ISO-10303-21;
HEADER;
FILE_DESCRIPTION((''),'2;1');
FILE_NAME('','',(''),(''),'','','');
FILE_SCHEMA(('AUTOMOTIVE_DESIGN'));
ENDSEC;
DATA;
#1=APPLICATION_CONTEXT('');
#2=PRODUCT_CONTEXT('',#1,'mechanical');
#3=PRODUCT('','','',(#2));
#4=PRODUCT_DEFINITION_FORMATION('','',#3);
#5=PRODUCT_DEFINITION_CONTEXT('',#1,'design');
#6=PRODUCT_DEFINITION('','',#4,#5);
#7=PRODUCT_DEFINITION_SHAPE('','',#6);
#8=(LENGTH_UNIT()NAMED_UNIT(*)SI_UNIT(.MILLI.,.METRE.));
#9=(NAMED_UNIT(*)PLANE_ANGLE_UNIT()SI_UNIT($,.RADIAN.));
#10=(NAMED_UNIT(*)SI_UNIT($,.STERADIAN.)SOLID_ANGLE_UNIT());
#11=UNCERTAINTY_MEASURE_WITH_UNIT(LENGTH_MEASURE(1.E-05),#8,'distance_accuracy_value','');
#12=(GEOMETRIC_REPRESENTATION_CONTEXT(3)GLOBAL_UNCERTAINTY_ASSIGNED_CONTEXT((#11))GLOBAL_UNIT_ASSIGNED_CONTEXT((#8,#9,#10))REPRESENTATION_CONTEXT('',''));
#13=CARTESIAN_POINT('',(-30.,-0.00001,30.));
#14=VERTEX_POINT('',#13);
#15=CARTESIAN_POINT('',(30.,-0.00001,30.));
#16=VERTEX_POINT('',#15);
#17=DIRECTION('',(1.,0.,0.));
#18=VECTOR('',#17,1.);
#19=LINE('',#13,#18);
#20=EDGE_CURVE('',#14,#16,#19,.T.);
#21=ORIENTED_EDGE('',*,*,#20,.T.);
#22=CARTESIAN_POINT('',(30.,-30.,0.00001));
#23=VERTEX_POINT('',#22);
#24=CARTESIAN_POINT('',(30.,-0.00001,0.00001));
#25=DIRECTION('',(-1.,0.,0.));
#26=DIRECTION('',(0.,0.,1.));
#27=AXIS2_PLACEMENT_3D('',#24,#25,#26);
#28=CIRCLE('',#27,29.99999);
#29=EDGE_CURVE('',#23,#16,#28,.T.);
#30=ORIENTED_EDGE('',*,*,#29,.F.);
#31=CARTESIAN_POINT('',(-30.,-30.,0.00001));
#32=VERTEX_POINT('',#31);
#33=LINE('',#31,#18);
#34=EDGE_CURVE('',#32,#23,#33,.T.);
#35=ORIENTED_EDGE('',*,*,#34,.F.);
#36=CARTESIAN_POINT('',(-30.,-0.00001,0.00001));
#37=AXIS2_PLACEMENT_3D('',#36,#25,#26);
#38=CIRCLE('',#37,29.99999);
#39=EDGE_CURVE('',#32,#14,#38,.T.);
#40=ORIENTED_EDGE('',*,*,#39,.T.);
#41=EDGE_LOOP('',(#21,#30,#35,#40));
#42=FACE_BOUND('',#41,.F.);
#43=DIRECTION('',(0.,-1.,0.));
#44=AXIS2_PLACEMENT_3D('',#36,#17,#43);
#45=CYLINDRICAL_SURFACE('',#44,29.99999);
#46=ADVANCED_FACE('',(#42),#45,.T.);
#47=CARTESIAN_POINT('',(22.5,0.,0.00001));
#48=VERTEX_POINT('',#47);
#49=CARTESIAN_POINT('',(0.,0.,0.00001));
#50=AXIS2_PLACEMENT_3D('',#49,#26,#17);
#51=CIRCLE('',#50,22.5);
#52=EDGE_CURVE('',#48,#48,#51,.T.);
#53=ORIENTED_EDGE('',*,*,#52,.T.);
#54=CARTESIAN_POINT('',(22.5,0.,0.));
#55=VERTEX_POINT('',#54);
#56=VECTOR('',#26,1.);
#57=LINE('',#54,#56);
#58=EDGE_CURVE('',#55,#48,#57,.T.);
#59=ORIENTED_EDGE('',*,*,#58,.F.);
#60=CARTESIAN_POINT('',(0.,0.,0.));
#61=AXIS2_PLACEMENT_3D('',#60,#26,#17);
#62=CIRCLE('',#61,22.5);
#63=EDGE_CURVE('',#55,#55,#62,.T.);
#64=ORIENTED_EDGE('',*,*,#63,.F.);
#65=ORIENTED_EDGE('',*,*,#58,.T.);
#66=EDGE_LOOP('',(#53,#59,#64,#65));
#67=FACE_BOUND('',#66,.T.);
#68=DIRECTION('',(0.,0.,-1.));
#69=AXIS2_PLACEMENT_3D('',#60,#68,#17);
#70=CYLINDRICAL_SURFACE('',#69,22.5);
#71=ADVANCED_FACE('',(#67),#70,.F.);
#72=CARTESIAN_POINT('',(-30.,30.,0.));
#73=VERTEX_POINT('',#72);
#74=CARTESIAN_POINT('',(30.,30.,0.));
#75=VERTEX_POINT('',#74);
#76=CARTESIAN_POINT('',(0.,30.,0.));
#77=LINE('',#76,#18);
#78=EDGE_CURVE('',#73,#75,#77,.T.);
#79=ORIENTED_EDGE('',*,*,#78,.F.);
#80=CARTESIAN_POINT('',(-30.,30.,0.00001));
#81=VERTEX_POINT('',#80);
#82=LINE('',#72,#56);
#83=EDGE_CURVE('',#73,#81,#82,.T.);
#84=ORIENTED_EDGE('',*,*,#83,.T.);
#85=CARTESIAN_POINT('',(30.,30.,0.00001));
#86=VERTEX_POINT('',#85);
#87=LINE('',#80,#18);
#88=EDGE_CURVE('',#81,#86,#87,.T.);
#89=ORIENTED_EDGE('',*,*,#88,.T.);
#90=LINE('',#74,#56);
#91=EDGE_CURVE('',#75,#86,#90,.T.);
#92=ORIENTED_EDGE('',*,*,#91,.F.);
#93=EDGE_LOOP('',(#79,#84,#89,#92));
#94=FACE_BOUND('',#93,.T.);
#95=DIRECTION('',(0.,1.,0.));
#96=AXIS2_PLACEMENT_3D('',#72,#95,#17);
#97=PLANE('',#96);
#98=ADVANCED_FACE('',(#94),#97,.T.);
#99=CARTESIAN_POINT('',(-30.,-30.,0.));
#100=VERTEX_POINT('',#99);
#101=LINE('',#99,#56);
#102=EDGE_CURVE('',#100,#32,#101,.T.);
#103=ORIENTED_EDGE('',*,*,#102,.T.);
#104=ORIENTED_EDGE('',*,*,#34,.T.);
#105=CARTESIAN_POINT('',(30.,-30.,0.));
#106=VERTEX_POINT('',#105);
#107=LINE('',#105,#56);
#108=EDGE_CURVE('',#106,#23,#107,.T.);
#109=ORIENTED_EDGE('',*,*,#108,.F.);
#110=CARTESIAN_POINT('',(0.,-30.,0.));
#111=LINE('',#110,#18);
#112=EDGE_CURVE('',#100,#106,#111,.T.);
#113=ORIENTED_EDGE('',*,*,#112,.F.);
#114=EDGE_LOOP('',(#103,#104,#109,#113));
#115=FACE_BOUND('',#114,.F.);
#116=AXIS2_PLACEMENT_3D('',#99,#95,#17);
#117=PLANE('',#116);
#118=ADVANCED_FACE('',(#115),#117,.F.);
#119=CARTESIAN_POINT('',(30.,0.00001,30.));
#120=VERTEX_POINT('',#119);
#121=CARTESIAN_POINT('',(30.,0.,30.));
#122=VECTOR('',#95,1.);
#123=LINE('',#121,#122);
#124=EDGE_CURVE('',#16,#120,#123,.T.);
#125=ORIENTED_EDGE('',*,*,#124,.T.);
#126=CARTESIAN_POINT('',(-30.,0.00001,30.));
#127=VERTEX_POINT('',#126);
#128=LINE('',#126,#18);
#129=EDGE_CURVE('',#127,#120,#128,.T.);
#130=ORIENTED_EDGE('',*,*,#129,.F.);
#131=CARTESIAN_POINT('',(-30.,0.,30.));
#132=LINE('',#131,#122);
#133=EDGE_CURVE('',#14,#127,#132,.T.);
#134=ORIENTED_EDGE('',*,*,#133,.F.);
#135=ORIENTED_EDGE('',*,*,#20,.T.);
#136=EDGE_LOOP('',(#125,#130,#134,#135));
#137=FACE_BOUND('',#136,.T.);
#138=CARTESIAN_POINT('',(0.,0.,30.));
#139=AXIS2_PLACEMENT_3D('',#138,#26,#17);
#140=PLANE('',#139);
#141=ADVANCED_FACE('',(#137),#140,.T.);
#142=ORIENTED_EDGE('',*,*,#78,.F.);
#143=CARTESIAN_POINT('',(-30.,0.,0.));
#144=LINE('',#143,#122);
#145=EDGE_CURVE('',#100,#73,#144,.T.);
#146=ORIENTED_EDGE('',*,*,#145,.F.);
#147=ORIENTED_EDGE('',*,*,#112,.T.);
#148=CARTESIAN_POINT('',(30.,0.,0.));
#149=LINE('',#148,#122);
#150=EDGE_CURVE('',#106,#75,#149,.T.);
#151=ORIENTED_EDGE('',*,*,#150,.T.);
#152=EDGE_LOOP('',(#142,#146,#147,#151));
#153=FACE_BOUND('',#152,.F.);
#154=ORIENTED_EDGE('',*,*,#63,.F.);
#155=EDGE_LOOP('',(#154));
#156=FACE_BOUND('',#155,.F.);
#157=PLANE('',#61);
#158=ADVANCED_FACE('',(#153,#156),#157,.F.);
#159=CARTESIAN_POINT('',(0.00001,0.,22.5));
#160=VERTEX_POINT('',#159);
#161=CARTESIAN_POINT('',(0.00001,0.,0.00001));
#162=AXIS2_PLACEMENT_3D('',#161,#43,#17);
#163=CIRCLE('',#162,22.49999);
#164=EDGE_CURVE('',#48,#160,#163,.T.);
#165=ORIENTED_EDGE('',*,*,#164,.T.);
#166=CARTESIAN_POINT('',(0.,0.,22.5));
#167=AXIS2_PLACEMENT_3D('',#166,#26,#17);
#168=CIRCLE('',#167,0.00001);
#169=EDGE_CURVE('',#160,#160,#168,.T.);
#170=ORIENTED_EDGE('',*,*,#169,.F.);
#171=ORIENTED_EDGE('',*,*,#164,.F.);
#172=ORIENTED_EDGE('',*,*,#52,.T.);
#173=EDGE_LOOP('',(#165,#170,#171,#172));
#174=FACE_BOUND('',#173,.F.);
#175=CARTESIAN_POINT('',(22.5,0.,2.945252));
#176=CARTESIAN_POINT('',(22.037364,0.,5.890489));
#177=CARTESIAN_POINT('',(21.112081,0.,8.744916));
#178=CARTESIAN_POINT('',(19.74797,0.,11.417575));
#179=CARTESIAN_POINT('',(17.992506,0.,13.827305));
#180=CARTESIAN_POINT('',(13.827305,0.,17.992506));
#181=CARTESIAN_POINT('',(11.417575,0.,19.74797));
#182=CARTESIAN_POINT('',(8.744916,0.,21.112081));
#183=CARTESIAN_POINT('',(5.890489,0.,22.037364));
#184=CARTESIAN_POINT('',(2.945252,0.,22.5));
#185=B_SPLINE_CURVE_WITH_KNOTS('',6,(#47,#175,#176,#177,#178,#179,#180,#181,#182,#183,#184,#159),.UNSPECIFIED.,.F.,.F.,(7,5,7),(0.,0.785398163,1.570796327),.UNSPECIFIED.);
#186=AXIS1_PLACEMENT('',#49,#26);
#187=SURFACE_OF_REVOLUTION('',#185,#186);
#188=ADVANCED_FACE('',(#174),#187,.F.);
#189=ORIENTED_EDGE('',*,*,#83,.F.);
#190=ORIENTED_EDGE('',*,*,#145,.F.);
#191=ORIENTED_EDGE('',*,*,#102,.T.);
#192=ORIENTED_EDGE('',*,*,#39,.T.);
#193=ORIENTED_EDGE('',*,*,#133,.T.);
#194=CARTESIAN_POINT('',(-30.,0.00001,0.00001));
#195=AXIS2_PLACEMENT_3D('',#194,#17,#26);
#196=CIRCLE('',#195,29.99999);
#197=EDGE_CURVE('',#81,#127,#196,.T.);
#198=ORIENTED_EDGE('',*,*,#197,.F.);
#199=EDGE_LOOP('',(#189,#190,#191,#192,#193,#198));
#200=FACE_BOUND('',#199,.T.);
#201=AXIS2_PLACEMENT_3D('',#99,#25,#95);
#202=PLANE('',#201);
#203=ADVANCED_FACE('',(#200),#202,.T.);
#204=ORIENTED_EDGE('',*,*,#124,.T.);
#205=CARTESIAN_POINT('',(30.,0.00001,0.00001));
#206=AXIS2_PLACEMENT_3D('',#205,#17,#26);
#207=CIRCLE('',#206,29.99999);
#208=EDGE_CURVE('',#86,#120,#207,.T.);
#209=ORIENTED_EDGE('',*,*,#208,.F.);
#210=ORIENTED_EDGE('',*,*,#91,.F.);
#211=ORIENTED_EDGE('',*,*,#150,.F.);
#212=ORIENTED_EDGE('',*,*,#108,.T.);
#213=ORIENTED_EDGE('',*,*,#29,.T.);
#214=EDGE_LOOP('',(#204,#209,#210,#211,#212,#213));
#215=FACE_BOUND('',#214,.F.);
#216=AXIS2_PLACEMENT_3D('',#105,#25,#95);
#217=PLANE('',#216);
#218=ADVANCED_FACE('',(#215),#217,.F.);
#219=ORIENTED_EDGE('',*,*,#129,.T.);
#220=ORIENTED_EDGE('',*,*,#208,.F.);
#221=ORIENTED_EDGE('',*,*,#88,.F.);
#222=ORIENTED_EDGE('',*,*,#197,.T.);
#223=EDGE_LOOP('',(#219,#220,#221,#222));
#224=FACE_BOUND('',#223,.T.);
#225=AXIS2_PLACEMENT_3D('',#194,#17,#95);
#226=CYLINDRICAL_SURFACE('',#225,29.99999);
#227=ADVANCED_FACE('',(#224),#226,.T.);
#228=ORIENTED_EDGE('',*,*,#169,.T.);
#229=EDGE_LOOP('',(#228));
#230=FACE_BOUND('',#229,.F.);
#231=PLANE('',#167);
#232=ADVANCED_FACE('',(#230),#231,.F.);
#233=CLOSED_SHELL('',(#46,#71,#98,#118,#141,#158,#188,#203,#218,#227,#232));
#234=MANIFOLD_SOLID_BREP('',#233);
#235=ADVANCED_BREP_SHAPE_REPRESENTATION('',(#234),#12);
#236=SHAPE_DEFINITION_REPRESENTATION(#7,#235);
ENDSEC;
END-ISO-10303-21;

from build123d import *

# Parameters (mm, degrees)
F0_W     = 60
F0_H     = 60
F0_R     = 22.5
F1_DEPTH = 30
F2_DEPTH = 22.5
F3_R     = 22.49999
F4_R     = 29.99999


# Not quite as in the source:
# - a fillet or chamfer is up to 0.001 mm smaller than in the source, because OpenCascade refuses the exact size
# - a feature names something its author has since deleted; it is built from what else it names


with BuildPart() as f1:
    # F0 (on Top) → F1 (new body)
    with BuildSketch(Plane.XY):
        Rectangle(F0_W, F0_H)
        Circle(F0_R, mode=Mode.SUBTRACT)
        Circle(F0_R)
    extrude(amount=F1_DEPTH)

    # F0 (on Top) → F2 (cut)
    with BuildSketch(Plane.XY):
        Circle(F0_R)
    extrude(amount=F2_DEPTH, mode=Mode.SUBTRACT)

    # F3 (radius 22.5 in the source; OpenCascade refuses exactly that, so slightly less here)
    f3_edges = [f1.edges().sort_by_distance(p)[0] for p in [
        (-22.5, 0, 22.5),
    ]]
    fillet(f3_edges, radius=F3_R)

    # F4 (radius 30 in the source; OpenCascade refuses exactly that, so slightly less here)
    f4_edges = [f1.edges().sort_by_distance(p)[0] for p in [
        (0, -30, 30),
        (0, 30, 30),
    ]]
    fillet(f4_edges, radius=F4_R)


solid = f1.part
